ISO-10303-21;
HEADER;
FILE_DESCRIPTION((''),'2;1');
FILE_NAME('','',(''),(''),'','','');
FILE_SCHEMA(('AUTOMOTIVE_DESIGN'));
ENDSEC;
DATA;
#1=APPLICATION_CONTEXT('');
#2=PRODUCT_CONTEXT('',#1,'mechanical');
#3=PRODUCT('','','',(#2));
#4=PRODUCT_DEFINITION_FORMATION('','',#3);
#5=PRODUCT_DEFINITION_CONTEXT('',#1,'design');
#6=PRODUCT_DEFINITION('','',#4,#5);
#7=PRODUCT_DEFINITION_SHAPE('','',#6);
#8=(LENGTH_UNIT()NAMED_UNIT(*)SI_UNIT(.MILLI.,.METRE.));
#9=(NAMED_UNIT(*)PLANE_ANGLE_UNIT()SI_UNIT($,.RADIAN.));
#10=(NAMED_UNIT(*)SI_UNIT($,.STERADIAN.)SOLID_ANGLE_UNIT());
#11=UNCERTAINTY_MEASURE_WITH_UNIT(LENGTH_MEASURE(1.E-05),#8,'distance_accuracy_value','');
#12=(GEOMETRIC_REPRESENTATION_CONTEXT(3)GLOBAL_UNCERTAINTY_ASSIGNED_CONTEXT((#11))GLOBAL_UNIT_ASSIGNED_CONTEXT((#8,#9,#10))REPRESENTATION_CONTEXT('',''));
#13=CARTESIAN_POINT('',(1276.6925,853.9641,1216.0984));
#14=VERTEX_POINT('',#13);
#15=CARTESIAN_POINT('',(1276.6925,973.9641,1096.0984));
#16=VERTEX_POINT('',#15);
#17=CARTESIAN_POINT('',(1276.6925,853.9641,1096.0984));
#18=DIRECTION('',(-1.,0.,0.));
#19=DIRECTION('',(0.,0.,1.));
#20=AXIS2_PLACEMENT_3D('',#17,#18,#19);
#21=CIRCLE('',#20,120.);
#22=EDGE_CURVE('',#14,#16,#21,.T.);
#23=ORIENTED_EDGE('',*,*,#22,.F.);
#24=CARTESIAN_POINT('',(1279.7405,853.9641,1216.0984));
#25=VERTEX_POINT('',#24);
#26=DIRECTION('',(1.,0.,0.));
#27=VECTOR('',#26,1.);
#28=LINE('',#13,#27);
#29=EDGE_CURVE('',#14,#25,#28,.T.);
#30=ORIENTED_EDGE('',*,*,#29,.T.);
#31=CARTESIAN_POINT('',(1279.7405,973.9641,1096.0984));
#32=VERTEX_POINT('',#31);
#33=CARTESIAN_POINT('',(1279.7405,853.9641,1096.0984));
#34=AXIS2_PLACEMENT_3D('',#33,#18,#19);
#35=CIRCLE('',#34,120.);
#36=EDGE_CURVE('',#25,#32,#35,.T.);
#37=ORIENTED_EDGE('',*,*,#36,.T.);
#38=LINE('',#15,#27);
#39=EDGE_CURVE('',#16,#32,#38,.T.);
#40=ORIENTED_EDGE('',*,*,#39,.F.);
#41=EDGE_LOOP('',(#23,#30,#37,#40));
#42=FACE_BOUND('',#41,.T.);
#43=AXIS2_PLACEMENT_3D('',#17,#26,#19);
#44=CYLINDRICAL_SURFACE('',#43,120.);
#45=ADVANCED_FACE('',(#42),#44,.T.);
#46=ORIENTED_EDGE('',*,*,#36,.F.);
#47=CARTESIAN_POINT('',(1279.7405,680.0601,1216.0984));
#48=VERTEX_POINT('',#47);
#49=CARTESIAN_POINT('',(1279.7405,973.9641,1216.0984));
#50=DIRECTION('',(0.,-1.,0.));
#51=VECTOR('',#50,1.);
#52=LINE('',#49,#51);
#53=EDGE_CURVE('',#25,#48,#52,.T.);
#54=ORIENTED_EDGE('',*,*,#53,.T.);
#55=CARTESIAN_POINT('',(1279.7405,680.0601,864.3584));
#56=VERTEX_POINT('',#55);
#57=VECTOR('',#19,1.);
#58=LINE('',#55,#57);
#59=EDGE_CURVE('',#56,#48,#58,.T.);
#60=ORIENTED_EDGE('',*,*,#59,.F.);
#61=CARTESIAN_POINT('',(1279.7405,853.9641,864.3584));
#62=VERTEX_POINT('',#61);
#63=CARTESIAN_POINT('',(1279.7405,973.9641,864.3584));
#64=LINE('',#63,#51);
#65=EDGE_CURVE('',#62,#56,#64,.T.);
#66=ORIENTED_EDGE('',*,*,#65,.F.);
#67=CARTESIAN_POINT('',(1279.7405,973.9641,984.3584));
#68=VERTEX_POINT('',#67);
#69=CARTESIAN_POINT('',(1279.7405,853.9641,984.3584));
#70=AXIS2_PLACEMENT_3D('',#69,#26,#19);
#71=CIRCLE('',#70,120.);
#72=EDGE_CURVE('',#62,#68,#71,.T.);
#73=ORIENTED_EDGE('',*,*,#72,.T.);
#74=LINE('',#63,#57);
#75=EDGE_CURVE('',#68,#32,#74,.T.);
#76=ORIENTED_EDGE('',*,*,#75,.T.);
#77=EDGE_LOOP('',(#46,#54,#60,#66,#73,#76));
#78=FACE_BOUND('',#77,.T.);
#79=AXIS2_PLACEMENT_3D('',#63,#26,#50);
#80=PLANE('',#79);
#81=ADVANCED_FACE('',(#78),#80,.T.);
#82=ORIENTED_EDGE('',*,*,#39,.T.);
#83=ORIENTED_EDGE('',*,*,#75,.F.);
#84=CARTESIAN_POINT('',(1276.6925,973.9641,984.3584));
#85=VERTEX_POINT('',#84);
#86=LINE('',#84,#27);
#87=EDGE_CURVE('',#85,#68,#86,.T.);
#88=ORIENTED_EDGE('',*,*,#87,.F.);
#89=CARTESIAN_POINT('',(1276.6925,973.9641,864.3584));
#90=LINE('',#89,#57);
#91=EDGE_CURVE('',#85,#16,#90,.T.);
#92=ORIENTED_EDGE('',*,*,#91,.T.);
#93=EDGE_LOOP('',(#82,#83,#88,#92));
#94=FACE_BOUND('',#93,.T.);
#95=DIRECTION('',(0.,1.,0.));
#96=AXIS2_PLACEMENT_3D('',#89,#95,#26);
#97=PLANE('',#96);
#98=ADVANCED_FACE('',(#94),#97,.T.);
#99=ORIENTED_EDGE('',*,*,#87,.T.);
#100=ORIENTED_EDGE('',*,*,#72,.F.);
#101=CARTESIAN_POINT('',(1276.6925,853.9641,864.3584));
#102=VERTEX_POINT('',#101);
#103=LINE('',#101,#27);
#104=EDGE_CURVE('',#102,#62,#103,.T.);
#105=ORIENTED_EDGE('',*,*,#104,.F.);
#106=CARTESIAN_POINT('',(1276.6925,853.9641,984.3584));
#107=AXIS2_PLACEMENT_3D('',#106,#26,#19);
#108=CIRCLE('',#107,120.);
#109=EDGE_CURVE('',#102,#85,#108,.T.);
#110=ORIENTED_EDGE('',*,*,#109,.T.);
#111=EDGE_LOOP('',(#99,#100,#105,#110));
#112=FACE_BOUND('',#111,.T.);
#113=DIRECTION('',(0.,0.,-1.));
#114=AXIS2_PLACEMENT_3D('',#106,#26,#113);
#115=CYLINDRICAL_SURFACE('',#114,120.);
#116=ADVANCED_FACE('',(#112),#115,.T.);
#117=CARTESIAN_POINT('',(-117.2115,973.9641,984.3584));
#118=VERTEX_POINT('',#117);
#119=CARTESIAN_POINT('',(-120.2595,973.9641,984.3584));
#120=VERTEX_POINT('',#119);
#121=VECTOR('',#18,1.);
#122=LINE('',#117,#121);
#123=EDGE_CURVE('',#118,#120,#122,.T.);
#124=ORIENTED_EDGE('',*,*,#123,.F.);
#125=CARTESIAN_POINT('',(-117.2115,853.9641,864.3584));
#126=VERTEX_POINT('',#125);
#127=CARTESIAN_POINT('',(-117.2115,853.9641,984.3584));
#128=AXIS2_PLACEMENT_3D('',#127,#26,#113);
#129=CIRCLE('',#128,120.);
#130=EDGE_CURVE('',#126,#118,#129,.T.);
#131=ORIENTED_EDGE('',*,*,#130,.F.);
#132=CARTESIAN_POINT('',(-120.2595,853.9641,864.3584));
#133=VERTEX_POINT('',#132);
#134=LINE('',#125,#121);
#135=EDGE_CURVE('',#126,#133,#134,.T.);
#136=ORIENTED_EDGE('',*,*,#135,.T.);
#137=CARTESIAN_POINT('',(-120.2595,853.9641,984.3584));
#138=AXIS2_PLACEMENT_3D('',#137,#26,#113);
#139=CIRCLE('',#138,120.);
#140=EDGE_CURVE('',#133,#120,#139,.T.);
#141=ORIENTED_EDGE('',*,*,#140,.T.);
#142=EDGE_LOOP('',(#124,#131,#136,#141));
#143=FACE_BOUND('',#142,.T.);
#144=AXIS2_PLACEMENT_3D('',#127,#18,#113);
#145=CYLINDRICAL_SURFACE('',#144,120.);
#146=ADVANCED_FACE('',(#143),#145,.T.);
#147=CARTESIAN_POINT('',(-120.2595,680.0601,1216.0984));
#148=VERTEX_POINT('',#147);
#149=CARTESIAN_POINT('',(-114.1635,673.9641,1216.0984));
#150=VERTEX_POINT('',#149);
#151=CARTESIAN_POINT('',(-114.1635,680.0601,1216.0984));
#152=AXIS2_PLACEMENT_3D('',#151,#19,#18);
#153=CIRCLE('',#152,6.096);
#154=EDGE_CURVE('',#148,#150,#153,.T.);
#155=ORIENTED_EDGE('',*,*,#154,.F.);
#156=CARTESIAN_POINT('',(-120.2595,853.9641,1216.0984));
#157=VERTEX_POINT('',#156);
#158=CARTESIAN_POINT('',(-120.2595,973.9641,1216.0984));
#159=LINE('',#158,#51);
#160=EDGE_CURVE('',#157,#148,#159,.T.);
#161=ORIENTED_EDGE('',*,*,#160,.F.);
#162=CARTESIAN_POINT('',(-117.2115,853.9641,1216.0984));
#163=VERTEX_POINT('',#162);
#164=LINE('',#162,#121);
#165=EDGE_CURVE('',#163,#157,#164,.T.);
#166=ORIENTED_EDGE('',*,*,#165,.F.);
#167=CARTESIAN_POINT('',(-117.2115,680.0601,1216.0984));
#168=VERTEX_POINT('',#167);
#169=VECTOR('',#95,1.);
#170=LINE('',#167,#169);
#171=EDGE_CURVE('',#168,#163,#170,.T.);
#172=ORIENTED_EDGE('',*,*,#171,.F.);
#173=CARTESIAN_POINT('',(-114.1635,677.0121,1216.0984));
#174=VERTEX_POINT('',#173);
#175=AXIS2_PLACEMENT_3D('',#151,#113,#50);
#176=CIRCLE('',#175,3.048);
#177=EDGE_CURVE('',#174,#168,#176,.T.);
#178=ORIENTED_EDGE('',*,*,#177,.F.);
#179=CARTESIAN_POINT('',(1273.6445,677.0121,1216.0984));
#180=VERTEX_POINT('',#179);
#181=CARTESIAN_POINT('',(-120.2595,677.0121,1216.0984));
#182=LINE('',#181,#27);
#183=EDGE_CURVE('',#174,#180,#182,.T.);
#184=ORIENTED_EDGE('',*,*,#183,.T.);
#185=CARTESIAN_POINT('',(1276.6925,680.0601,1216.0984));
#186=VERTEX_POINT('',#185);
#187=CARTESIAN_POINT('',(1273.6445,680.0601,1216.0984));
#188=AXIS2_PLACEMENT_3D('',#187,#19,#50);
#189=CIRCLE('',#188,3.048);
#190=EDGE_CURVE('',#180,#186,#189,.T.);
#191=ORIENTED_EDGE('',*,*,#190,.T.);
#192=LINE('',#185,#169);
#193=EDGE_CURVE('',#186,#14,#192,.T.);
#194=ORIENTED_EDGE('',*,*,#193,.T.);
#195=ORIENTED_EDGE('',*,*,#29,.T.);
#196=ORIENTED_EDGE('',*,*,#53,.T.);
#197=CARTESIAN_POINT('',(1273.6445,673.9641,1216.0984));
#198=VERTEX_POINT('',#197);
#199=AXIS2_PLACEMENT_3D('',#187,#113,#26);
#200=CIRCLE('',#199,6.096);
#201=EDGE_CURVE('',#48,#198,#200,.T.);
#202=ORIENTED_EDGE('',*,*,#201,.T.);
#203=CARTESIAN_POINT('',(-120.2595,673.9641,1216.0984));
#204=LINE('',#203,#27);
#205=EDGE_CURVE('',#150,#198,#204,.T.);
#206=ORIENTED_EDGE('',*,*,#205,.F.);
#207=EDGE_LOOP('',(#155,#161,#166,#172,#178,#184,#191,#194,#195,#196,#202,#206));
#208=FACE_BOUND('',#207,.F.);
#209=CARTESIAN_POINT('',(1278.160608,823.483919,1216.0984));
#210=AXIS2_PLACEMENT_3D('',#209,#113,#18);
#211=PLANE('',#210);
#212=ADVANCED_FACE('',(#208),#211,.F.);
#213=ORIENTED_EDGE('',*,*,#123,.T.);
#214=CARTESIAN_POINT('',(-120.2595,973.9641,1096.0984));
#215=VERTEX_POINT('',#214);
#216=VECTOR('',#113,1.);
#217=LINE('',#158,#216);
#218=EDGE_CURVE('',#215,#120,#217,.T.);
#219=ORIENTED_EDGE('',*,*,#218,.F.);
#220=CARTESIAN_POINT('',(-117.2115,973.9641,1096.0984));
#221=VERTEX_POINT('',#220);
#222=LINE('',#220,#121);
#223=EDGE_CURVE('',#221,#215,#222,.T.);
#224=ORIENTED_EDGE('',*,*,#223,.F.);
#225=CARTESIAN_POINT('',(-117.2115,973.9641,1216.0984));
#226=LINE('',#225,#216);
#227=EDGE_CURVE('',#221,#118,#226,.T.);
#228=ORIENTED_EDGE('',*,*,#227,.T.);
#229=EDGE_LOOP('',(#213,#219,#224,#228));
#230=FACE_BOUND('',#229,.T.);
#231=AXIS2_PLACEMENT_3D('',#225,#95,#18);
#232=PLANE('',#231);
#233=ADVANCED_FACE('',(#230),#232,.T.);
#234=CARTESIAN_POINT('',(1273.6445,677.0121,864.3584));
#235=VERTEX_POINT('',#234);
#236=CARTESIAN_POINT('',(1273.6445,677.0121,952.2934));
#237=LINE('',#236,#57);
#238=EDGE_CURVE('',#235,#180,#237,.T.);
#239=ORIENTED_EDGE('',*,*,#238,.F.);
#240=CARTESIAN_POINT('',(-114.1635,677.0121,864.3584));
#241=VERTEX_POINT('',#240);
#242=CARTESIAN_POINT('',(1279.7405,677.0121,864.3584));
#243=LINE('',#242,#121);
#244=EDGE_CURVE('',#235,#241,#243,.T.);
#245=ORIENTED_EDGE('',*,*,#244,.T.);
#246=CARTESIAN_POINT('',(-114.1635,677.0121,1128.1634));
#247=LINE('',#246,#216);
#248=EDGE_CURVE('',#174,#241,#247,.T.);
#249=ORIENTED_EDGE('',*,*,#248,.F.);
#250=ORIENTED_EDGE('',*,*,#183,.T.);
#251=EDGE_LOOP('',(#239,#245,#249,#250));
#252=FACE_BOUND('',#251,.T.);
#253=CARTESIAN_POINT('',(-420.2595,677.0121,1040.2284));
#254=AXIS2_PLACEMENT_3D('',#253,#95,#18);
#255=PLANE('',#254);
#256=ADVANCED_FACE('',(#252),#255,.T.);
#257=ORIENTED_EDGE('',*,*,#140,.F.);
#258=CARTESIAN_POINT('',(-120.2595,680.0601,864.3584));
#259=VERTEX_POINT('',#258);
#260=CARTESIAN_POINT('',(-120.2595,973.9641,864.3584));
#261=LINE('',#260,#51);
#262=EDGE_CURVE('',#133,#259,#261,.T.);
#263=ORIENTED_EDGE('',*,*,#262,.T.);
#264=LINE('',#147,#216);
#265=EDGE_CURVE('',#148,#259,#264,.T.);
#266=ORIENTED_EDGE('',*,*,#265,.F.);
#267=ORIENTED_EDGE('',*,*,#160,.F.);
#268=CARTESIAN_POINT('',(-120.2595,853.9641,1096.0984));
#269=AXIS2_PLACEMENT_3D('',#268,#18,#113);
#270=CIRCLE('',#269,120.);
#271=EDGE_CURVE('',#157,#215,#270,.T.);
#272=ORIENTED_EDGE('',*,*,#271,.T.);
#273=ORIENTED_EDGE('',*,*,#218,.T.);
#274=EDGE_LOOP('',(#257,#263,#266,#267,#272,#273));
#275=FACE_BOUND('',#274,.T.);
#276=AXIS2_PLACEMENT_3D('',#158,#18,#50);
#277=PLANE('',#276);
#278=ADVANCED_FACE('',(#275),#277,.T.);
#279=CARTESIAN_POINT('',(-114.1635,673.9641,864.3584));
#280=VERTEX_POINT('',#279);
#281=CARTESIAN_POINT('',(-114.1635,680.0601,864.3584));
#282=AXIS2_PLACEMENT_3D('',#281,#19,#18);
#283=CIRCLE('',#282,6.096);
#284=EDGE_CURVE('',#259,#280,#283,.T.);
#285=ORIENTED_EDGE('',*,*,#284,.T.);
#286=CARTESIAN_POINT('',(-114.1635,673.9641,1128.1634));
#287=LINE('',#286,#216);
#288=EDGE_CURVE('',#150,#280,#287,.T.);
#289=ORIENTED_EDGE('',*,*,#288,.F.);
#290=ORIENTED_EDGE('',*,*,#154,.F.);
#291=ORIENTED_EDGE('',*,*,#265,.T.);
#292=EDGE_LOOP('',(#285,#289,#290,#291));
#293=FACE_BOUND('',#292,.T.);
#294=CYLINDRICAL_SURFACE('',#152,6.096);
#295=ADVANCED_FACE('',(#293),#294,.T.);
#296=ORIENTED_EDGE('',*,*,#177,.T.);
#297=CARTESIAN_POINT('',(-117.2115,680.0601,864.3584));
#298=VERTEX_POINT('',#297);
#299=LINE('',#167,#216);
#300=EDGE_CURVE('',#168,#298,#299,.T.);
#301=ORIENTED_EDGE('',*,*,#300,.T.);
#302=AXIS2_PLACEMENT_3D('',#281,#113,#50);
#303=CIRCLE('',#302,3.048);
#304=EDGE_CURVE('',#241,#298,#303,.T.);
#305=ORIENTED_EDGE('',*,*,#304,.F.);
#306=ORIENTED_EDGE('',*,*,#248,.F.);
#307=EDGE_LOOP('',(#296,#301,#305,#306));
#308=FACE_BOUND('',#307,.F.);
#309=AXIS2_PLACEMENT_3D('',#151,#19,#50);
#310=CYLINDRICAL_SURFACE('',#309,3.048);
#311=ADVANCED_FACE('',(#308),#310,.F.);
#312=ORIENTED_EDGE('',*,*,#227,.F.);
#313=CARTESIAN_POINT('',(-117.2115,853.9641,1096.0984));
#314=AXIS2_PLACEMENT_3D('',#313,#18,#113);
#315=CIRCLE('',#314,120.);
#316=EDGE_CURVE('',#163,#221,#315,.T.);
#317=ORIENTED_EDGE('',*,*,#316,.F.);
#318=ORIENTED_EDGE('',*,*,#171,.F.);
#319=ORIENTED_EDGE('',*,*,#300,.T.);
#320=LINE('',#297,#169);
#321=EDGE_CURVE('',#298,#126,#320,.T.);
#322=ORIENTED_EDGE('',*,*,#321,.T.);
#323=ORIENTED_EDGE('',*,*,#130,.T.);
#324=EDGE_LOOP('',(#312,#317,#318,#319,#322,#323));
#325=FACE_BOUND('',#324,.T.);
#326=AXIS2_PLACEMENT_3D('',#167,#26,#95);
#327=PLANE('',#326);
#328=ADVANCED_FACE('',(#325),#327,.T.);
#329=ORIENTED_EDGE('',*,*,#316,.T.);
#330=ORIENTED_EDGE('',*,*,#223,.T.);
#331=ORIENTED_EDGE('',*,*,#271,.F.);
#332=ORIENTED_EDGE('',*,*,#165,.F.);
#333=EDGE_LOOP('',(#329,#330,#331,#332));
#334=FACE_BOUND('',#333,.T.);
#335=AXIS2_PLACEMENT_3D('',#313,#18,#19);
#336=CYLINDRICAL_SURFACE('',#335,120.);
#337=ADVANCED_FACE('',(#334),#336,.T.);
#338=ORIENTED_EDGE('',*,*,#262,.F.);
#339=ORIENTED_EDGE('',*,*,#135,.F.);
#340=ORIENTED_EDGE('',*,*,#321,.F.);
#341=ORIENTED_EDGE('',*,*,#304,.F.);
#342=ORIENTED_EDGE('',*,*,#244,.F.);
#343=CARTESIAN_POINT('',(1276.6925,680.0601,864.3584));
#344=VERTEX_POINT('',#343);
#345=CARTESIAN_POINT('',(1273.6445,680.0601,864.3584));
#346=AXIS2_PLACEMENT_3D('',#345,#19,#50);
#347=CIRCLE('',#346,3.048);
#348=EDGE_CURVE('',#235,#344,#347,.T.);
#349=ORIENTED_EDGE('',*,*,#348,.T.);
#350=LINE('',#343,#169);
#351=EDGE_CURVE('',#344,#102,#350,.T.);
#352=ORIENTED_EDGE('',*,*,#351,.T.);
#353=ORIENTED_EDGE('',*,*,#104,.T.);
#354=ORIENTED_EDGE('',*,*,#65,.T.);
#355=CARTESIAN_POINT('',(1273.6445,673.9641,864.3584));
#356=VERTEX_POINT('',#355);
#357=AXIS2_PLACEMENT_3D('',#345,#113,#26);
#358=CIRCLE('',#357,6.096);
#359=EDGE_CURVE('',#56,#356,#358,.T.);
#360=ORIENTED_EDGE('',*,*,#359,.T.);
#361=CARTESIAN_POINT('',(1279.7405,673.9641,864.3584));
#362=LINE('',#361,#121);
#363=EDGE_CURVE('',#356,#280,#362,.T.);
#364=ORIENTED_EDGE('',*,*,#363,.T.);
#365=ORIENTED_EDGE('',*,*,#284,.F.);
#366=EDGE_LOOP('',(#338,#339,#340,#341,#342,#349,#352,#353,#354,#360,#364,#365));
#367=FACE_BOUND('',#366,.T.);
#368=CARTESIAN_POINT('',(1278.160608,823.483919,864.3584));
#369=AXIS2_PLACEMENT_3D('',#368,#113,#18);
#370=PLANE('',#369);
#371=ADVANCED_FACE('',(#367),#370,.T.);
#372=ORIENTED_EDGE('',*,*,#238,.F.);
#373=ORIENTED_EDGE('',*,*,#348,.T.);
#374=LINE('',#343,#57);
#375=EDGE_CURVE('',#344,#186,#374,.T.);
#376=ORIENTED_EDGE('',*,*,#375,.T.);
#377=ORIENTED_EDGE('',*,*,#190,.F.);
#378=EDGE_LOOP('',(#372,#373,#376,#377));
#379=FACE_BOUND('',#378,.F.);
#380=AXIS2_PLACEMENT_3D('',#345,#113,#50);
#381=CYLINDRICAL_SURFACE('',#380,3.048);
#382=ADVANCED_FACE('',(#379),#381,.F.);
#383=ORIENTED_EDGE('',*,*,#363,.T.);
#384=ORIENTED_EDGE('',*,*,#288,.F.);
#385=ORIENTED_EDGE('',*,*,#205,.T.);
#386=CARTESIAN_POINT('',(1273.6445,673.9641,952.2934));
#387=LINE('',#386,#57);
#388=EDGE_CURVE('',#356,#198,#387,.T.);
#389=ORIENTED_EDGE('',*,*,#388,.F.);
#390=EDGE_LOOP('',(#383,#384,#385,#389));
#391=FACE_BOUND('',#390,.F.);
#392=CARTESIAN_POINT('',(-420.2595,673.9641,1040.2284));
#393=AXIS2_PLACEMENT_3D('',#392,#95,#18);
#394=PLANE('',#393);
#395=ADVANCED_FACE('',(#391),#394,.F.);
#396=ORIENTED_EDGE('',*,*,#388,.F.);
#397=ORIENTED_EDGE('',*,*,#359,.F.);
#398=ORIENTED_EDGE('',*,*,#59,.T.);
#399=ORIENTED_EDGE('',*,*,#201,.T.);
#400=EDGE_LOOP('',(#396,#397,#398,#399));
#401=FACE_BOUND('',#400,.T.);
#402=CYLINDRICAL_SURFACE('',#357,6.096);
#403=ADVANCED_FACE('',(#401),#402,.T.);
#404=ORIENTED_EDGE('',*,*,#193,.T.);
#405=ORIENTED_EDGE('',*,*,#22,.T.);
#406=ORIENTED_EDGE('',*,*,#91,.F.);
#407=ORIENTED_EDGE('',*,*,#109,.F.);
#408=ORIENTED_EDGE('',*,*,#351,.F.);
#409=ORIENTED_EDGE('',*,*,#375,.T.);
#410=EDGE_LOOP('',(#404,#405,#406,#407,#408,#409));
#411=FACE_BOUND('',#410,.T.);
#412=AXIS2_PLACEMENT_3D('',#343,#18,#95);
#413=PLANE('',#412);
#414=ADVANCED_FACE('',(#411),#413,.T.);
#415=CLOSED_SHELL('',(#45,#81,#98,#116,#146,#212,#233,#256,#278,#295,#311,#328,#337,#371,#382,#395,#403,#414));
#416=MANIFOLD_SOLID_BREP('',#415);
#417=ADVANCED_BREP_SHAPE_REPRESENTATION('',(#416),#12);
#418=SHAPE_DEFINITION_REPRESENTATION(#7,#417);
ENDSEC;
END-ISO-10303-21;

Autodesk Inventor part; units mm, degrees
ref_plane "YZ Plane" through (0, 0, 0) normal (1, 0, 0) x (0, 1, 0)
ref_plane "XZ Plane" through (0, 0, 0) normal (0, 1, 0) x (-1, 0, 0)
ref_plane "XY Plane" through (0, 0, 0) normal (0, 0, 1) x (1, 0, 0)
ref_plane "Work Plane1" through (-420.2595, 673.9641, 1040.2284) normal (0, 1, 0) x (-1, 0, 0)
sketch "Sketch1" plane through (-420.2595, 673.9641, 1040.2284) normal (0, 1, 0) x (-1, 0, 0)
  line L0 (-1974.87, 175.87) -> (-25.13, 175.87) construction
  line L1 (-25.13, -175.87) -> (-1974.87, -175.87) construction
  line L2 (-24.13, 0) -> (-24.13, 224.13) construction
  line L3 (-1975.87, -224.13) -> (-1975.87, 0) construction
  line L4 (-1975.87, 0) -> (-1975.87, 224.13) construction
  line L5 (-24.13, -224.13) -> (-24.13, 0) construction
  line L6 (-300, 175.87) -> (-1700, 175.87)
  line L7 (-1700, 175.87) -> (-1700, -175.87)
  line L8 (-1700, -175.87) -> (-300, -175.87)
  line L9 (-300, -175.87) -> (-300, 175.87)
  point P0 (-420.2595, -1040.2284)
  point P1 (-1000, 175.87)
  point P2 (-1000, -175.87)
  point P3 (-1000, -175.87)
  dimension "d0" = 1400
extrude "Plate1" add sketch "Sketch1" along normal blind 3.048
sketch "Sketch2" plane through (1276.6925, 673.9641, 864.3584) normal (1, 0, 0) x (0, 1, 0)
  line L0 (0, 351.74) -> (0, 0)
  line L1 (0, 0) -> (300, 0)
  line L2 (300, 0) -> (300, 351.74)
  line L3 (300, 351.74) -> (0, 351.74)
edge flange "Flange1" height 300 angle 90 thickness 3.048 bend radius 3.048 thickness toward (1, 0, 0) relief tear relief width 3.048 relief depth 1.524 corner gap 3.048 corner form 0 edges at (1279.7405, 677.0121, 1040.2284) (-120.2595, 677.0121, 1040.2284) wall of the first edge with corners at (1276.6925, 673.9641, 1216.0984) (1276.6925, 673.9641, 864.3584) (1276.6925, 973.9641, 864.3584) (1276.6925, 973.9641, 1216.0984)
bend "Bend1"
corner "Corner1"
fillet "Corner Round1" radius 120 4 edges at (-118.7355, 973.9641, 1216.0984) (-118.7355, 973.9641, 864.3584) (1278.2165, 973.9641, 1216.0984) (1278.2165, 973.9641, 864.3584)
equation "\"d1\" = Thickness"
equation "\"d2\" = BendReliefWidth"
equation "\"d3\" = BendReliefDepth"
equation "\"d4\" = MinimumRemnant"
equation "\"d5\" = TransitionRadius"
equation "\"d8\" = BendRadius"
equation "\"d9\" = CornerReliefSize"
equation "\"d10\" = GapSize"
equation "\"d11\" = JacobiRadiusSize"
equation "\"BendRadius\" = Thickness"
equation "\"BendReliefWidth\" = Thickness"
equation "\"BendReliefDepth\" = 0.5 * Thickness"
equation "\"CornerReliefSize\" = 4 * Thickness"
equation "\"MinimumRemnant\" = 2 * Thickness"
equation "\"TransitionRadius\" = BendRadius"
equation "\"JacobiRadiusSize\" = BendRadius"
equation "\"GapSize\" = Thickness"
equation "\"Thickness\" = 3.048"
properties part number "CE-5.2.3-03"
